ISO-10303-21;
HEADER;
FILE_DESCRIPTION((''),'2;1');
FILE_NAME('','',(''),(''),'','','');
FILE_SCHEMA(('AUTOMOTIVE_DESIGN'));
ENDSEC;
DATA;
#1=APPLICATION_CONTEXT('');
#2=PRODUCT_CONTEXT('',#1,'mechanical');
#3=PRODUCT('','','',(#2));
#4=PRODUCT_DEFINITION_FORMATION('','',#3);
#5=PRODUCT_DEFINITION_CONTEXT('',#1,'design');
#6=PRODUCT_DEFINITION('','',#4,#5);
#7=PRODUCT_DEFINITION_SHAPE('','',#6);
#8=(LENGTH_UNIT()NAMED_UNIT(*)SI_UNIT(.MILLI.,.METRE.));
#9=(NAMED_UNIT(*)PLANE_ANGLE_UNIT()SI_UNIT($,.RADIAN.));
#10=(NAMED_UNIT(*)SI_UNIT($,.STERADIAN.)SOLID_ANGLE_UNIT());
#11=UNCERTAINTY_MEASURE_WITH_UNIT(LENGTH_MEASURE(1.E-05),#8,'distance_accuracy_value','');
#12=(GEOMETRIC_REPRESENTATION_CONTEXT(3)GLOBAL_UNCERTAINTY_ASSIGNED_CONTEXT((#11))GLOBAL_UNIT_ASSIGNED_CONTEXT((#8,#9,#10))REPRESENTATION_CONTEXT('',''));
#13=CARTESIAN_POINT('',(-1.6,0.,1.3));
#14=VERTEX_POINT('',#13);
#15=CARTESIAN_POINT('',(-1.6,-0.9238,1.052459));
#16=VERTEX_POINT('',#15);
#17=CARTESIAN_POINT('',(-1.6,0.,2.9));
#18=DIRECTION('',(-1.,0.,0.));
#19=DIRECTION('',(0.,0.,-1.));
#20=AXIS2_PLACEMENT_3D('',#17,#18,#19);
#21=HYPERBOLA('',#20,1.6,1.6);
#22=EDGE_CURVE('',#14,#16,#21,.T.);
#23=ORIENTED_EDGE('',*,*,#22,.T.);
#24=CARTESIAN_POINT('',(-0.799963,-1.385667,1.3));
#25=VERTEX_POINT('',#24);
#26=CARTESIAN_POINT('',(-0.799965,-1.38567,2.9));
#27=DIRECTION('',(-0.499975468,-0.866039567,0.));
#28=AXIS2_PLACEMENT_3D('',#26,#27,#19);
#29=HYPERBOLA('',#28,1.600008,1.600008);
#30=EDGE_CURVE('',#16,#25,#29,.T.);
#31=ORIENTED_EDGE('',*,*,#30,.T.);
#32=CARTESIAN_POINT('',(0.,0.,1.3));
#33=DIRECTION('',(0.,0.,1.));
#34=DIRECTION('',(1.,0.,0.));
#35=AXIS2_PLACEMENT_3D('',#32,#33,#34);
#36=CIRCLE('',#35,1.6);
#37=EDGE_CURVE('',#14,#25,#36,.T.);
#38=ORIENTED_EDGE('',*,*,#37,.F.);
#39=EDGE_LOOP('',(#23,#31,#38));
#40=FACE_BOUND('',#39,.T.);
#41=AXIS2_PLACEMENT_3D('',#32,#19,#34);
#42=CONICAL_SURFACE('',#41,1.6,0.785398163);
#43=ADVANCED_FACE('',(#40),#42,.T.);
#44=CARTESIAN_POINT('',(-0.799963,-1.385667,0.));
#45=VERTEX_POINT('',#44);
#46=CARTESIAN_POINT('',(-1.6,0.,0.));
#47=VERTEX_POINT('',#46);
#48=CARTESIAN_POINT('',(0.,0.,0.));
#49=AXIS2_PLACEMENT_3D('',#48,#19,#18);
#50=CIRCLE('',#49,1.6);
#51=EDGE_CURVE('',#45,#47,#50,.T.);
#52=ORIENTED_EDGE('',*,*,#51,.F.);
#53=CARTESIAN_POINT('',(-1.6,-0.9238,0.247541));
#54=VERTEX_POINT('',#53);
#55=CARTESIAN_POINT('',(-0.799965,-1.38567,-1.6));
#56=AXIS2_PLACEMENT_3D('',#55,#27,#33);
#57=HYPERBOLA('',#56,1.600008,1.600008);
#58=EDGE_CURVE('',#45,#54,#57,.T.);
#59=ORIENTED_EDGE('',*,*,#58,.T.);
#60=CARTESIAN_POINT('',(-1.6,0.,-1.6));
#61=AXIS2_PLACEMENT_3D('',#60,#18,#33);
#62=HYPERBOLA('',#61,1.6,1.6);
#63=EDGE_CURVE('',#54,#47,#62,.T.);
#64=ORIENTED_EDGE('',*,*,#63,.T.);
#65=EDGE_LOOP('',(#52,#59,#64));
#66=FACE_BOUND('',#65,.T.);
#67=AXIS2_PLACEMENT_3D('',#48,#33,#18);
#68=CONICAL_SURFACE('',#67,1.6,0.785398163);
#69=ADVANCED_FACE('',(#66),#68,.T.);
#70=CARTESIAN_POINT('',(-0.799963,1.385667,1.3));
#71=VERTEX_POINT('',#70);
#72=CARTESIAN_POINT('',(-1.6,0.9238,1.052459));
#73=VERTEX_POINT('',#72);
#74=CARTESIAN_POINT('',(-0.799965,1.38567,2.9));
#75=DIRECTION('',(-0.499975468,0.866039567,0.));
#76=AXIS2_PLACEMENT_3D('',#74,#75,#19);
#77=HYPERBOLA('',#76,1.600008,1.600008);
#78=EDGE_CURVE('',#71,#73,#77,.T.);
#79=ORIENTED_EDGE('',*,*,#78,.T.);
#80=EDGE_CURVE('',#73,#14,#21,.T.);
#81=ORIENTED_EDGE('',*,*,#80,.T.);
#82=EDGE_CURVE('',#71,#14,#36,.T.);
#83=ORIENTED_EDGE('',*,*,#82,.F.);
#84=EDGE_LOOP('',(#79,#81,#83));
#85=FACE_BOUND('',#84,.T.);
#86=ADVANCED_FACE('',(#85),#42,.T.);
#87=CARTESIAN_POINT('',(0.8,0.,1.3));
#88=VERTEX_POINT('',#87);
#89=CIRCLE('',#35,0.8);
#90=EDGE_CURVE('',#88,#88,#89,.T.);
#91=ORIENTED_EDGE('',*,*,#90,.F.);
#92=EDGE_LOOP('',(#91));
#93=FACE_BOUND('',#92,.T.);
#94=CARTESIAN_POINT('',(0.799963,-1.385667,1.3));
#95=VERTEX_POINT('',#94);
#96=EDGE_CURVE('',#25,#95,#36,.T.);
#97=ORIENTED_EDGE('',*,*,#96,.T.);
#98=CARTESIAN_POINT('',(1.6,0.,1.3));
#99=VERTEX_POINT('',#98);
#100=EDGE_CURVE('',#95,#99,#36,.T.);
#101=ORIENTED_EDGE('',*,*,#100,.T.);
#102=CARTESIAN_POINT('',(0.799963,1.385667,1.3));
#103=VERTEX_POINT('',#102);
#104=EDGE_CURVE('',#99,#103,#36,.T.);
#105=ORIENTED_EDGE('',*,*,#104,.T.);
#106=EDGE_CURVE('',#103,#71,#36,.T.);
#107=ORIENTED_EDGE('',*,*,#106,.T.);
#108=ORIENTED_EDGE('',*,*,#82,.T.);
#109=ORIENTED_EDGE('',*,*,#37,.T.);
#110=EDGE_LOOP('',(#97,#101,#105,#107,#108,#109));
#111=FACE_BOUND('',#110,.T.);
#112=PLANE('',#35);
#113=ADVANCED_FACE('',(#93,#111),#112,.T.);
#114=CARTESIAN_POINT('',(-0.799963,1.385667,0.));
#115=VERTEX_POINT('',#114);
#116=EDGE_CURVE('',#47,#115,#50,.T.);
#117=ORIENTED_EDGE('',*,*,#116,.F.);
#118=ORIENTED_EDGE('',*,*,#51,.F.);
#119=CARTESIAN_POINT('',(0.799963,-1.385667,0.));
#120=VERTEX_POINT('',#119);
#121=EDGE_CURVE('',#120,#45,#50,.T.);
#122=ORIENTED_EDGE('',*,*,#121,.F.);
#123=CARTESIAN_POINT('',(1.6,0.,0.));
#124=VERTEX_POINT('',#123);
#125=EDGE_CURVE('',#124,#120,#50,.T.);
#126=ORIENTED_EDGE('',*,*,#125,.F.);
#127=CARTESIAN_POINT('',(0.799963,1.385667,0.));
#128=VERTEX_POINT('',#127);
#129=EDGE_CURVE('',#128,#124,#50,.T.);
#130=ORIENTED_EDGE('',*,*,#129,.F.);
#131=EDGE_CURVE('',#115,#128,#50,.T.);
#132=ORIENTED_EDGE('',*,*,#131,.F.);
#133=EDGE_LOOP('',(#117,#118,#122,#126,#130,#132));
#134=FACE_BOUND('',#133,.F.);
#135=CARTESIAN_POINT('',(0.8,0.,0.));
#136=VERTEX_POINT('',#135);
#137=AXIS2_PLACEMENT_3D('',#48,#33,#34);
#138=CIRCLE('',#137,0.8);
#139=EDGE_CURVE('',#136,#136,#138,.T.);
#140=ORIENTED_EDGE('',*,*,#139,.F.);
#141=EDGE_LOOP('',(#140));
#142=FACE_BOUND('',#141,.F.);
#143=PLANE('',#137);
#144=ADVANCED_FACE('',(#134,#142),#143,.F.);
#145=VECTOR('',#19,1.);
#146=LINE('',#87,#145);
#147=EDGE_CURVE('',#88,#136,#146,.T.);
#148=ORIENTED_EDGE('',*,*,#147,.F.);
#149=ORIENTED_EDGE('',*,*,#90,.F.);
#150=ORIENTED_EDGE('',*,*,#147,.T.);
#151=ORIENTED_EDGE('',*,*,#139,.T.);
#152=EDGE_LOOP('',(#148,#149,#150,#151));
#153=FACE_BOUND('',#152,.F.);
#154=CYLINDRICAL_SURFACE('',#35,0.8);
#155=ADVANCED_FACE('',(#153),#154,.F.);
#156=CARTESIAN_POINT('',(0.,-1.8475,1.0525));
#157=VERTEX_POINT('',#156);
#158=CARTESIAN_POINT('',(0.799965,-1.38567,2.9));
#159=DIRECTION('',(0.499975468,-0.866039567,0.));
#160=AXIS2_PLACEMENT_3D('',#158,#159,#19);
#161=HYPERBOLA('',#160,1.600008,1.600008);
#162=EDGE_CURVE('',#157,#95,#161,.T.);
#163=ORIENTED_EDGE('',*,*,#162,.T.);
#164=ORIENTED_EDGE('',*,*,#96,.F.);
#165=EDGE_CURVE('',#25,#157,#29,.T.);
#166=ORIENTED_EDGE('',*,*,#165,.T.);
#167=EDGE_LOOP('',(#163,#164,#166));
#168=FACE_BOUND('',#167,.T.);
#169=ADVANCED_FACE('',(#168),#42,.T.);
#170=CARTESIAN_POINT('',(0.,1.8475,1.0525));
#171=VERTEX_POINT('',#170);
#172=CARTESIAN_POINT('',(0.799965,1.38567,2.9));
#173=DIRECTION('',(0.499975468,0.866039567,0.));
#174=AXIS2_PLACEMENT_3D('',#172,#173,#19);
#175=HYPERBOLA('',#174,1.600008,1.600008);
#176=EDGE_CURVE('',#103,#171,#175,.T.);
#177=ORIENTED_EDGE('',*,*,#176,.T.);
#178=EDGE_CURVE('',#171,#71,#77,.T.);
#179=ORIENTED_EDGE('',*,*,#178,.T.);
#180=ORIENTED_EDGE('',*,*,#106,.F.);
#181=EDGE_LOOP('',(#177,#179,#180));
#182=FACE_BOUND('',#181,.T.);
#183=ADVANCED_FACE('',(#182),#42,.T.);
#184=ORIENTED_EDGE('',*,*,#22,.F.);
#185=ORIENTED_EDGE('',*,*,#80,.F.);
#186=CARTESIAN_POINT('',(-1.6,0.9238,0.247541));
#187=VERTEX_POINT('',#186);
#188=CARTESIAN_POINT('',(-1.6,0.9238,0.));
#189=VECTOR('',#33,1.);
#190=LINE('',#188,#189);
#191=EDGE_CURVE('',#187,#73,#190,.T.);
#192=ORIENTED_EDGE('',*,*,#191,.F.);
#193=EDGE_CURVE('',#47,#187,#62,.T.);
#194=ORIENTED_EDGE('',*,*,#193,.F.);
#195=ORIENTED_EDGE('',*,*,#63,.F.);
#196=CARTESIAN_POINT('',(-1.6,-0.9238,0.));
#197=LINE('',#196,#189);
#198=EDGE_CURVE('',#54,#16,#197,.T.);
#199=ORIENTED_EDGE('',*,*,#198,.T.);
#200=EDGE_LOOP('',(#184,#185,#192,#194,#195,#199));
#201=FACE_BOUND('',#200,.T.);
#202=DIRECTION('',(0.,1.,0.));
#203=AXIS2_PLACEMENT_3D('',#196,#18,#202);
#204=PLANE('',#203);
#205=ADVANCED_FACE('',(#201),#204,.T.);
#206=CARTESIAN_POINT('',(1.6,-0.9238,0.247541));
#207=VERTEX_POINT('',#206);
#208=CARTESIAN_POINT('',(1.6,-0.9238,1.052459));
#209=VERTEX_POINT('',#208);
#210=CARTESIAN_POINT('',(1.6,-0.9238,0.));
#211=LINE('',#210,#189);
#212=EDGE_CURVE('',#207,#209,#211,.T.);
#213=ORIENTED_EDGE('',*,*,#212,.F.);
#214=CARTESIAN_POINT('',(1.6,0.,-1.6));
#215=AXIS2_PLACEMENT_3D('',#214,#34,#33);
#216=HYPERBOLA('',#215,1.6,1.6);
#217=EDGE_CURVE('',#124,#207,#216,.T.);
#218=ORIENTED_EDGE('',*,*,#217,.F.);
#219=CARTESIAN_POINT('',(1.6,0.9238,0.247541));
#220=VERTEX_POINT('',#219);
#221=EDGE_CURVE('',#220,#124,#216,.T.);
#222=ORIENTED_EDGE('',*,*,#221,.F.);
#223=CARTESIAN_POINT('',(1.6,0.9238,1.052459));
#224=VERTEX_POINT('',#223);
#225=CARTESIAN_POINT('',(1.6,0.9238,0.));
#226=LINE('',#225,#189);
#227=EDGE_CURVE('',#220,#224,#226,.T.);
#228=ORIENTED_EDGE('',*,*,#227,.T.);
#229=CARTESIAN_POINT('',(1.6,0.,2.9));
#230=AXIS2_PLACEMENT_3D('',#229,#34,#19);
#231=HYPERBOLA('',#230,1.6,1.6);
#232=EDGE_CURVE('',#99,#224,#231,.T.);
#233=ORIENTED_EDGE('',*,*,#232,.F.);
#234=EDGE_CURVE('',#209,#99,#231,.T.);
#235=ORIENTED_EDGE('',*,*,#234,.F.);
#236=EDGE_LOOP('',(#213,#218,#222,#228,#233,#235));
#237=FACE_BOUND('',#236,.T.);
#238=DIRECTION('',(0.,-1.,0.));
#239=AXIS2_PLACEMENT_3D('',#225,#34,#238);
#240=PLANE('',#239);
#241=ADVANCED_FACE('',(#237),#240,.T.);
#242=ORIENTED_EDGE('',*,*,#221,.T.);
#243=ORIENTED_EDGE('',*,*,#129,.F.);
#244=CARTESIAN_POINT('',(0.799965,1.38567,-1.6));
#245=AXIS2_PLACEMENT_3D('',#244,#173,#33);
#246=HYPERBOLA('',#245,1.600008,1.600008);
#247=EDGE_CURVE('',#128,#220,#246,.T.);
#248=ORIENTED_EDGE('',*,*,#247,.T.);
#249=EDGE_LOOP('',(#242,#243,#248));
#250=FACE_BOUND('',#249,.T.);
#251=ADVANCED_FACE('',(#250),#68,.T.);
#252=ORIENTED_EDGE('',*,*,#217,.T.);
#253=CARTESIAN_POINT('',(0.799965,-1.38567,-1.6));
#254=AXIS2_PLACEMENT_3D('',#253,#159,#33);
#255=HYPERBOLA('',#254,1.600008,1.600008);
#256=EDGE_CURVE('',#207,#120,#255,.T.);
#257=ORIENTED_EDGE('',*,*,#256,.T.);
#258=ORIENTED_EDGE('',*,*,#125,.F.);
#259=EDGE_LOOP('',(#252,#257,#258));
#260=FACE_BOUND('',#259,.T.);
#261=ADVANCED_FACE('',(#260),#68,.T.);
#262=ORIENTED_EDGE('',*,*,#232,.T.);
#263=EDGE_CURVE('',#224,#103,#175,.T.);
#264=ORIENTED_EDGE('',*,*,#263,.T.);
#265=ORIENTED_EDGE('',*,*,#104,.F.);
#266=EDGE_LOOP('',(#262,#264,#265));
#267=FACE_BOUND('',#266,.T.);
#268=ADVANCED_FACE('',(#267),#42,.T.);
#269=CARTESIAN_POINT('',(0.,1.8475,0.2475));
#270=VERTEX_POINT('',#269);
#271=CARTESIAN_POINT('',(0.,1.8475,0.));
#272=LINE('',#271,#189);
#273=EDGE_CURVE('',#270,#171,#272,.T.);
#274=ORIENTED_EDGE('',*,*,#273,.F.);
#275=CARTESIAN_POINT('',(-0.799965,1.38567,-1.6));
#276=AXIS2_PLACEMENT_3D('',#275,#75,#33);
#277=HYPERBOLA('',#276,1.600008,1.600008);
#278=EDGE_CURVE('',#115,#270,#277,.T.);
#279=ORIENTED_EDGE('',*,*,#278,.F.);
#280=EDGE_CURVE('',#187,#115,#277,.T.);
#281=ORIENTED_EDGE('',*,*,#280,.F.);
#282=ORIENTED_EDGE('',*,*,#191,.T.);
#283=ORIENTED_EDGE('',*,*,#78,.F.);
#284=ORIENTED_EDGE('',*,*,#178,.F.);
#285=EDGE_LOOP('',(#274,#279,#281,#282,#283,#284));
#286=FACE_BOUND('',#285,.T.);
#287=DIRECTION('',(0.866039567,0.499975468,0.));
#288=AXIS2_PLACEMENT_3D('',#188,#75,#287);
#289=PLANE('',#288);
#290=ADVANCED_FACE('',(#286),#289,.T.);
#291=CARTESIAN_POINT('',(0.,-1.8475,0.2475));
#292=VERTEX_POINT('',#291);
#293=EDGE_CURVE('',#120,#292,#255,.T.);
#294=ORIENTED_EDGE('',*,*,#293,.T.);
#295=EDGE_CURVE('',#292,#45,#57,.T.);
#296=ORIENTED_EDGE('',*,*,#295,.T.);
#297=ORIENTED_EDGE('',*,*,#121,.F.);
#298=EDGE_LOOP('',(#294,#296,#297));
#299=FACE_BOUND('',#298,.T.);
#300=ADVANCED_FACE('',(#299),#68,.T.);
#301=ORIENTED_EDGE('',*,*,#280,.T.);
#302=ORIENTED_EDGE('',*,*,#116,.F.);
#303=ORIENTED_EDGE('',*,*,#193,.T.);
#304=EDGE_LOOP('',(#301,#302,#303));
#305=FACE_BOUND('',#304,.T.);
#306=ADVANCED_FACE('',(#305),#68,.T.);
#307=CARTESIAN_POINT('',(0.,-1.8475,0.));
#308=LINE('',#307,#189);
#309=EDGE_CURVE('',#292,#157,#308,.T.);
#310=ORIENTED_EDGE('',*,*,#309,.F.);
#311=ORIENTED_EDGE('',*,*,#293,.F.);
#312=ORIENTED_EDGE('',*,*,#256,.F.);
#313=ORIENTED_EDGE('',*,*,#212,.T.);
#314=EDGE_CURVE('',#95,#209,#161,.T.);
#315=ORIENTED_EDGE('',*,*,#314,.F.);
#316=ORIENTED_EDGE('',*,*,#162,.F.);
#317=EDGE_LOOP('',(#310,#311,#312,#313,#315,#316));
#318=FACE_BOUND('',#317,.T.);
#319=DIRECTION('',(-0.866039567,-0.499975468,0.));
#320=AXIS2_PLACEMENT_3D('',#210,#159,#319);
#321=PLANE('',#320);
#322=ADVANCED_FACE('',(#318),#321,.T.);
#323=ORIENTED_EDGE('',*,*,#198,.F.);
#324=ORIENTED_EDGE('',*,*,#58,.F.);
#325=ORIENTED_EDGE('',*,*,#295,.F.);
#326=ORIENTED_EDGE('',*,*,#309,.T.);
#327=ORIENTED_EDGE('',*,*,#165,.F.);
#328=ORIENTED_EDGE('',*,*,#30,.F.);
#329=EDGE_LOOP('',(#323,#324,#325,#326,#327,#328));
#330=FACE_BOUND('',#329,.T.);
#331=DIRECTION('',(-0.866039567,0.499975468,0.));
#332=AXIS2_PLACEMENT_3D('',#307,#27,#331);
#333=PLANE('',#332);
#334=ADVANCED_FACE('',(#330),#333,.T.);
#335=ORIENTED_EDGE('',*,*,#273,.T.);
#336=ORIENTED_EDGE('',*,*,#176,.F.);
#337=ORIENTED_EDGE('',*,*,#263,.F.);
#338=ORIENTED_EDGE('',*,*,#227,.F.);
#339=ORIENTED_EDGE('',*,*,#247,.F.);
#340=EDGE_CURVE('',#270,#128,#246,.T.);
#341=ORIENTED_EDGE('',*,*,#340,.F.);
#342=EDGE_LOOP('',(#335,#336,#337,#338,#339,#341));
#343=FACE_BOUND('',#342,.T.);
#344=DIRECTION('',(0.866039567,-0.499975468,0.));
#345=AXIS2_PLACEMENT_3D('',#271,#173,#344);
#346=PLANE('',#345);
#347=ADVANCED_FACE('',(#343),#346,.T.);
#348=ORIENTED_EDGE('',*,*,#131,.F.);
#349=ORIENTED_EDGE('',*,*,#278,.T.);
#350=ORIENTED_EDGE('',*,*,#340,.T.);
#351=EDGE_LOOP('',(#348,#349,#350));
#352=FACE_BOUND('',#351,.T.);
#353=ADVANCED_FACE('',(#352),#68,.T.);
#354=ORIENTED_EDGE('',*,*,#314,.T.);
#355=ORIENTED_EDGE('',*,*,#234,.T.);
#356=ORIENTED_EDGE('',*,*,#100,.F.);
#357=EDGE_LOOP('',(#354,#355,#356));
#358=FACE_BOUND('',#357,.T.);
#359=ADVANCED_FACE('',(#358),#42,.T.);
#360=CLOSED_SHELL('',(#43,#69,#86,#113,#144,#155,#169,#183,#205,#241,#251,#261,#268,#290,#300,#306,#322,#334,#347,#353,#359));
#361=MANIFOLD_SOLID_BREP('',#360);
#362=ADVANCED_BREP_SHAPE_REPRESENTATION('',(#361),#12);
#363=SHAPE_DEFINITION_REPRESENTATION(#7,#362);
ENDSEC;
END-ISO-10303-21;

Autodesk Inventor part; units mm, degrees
ref_plane "YZ Plane" through (0, 0, 0) normal (1, 0, 0) x (0, 1, 0)
ref_plane "XZ Plane" through (0, 0, 0) normal (0, 1, 0) x (-1, 0, 0)
ref_plane "XY Plane" through (0, 0, 0) normal (0, 0, 1) x (1, 0, 0)
sketch "Sketch1" plane through (0, 0, 0) normal (0, 0, 1) x (1, 0, 0)
  line L0 (0, 1.8475) -> (1.6, 0.9238)
  line L1 (1.6, 0.9238) -> (1.6, -0.9238)
  line L2 (1.6, -0.9238) -> (0, -1.8475)
  line L3 (0, -1.8475) -> (-1.6, -0.9238)
  line L4 (-1.6, -0.9238) -> (-1.6, 0.9238)
  line L5 (-1.6, 0.9238) -> (0, 1.8475)
  point P0 (0, 0)
  point P1 (0, 0)
  dimension "d0" = 3.2
extrude "Main Body" add sketch "Sketch1" along normal blind 1.3
sketch "Sketch2" plane through (0, 0, 1.3) normal (0, 0, 1) x (1, 0, 0)
  circle A0 centre (0, 0) radius 1.6
  line L0 (1.6, -0.9238) -> (1.6, 0.9238) construction
  point P0 (1.6, 0)
extrude "Front Taper" cut sketch "Sketch2" against normal up to surface (1.3 mm away) draft 45 keep common part
sketch "Sketch3" plane through (0, 0, 0) normal (0, 0, -1) x (-1, 0, 0)
  circle A0 centre (0, 0) radius 1.6
  line L0 (-1.6, -0.9238) -> (-1.6, 0.9238) projected
  point P0 (-1.6, 0)
extrude "Back Taper" cut sketch "Sketch3" against normal up to surface (1.3 mm away) draft 45 keep common part
sketch "Sketch4" plane through (0, 0, 1.3) normal (0, 0, 1) x (1, 0, 0)
  circle A0 centre (0, 0) radius 0.8
  dimension "d9" = 1.6
extrude "Center Hole" cut sketch "Sketch4" against normal up to surface (1.3 mm away)
thread "Thread1" size "M1.6x0.35" class "6H" standard "ANSI Metric M Profile" full length
sketch "Sketch5" plane through (0, 0, 0) normal (1, 0, 0) x (0, 1, 0)
  line L0 (-1.0281, 1.9183) -> (-0.8, 2.05)
  line L1 (-0.8, 2.05) -> (-0.8, 1.7)
  line L2 (-0.8, 1.7) -> (-1.0281, 1.8317)
  line L3 (-1.1031, 1.875) -> (-0.8, 1.875) construction
  line L4 (-0.8, 1.3) -> (0.8, 1.3) construction
  arc A0 (-1.0281, 1.9183) -> (-1.0281, 1.8317) centre (-1.0031, 1.875) ccw
  point P0 (0, 0)
  point P1 (-0.901, 1.875)
  dimension "d14" = 0.35
  dimension "d15" = 0.4
  dimension "d16" = 0
  dimension "d17" = 0.05
coil "Coil1" [suppressed]
equation "\"d0\" = size"
equation "\"d1\" = thickness"
equation "\"d9\" = nominalDiameter"
equation "\"d14\" = threadPitch"
equation "\"d15\" = 1.14286 * threadPitch"
equation "\"d17\" = 0.142857 * threadPitch"
equation "\"d18\" = threadPitch"
equation "\"d19\" = 1.57143 * thickness"
equation "\"size\" = 3.2"
equation "\"thickness\" = 1.3"
equation "\"nominalDiameter\" = 1.6"
equation "\"threadPitch\" = 0.35"
properties part number "M1.6" material "Steel, Galvanized"
